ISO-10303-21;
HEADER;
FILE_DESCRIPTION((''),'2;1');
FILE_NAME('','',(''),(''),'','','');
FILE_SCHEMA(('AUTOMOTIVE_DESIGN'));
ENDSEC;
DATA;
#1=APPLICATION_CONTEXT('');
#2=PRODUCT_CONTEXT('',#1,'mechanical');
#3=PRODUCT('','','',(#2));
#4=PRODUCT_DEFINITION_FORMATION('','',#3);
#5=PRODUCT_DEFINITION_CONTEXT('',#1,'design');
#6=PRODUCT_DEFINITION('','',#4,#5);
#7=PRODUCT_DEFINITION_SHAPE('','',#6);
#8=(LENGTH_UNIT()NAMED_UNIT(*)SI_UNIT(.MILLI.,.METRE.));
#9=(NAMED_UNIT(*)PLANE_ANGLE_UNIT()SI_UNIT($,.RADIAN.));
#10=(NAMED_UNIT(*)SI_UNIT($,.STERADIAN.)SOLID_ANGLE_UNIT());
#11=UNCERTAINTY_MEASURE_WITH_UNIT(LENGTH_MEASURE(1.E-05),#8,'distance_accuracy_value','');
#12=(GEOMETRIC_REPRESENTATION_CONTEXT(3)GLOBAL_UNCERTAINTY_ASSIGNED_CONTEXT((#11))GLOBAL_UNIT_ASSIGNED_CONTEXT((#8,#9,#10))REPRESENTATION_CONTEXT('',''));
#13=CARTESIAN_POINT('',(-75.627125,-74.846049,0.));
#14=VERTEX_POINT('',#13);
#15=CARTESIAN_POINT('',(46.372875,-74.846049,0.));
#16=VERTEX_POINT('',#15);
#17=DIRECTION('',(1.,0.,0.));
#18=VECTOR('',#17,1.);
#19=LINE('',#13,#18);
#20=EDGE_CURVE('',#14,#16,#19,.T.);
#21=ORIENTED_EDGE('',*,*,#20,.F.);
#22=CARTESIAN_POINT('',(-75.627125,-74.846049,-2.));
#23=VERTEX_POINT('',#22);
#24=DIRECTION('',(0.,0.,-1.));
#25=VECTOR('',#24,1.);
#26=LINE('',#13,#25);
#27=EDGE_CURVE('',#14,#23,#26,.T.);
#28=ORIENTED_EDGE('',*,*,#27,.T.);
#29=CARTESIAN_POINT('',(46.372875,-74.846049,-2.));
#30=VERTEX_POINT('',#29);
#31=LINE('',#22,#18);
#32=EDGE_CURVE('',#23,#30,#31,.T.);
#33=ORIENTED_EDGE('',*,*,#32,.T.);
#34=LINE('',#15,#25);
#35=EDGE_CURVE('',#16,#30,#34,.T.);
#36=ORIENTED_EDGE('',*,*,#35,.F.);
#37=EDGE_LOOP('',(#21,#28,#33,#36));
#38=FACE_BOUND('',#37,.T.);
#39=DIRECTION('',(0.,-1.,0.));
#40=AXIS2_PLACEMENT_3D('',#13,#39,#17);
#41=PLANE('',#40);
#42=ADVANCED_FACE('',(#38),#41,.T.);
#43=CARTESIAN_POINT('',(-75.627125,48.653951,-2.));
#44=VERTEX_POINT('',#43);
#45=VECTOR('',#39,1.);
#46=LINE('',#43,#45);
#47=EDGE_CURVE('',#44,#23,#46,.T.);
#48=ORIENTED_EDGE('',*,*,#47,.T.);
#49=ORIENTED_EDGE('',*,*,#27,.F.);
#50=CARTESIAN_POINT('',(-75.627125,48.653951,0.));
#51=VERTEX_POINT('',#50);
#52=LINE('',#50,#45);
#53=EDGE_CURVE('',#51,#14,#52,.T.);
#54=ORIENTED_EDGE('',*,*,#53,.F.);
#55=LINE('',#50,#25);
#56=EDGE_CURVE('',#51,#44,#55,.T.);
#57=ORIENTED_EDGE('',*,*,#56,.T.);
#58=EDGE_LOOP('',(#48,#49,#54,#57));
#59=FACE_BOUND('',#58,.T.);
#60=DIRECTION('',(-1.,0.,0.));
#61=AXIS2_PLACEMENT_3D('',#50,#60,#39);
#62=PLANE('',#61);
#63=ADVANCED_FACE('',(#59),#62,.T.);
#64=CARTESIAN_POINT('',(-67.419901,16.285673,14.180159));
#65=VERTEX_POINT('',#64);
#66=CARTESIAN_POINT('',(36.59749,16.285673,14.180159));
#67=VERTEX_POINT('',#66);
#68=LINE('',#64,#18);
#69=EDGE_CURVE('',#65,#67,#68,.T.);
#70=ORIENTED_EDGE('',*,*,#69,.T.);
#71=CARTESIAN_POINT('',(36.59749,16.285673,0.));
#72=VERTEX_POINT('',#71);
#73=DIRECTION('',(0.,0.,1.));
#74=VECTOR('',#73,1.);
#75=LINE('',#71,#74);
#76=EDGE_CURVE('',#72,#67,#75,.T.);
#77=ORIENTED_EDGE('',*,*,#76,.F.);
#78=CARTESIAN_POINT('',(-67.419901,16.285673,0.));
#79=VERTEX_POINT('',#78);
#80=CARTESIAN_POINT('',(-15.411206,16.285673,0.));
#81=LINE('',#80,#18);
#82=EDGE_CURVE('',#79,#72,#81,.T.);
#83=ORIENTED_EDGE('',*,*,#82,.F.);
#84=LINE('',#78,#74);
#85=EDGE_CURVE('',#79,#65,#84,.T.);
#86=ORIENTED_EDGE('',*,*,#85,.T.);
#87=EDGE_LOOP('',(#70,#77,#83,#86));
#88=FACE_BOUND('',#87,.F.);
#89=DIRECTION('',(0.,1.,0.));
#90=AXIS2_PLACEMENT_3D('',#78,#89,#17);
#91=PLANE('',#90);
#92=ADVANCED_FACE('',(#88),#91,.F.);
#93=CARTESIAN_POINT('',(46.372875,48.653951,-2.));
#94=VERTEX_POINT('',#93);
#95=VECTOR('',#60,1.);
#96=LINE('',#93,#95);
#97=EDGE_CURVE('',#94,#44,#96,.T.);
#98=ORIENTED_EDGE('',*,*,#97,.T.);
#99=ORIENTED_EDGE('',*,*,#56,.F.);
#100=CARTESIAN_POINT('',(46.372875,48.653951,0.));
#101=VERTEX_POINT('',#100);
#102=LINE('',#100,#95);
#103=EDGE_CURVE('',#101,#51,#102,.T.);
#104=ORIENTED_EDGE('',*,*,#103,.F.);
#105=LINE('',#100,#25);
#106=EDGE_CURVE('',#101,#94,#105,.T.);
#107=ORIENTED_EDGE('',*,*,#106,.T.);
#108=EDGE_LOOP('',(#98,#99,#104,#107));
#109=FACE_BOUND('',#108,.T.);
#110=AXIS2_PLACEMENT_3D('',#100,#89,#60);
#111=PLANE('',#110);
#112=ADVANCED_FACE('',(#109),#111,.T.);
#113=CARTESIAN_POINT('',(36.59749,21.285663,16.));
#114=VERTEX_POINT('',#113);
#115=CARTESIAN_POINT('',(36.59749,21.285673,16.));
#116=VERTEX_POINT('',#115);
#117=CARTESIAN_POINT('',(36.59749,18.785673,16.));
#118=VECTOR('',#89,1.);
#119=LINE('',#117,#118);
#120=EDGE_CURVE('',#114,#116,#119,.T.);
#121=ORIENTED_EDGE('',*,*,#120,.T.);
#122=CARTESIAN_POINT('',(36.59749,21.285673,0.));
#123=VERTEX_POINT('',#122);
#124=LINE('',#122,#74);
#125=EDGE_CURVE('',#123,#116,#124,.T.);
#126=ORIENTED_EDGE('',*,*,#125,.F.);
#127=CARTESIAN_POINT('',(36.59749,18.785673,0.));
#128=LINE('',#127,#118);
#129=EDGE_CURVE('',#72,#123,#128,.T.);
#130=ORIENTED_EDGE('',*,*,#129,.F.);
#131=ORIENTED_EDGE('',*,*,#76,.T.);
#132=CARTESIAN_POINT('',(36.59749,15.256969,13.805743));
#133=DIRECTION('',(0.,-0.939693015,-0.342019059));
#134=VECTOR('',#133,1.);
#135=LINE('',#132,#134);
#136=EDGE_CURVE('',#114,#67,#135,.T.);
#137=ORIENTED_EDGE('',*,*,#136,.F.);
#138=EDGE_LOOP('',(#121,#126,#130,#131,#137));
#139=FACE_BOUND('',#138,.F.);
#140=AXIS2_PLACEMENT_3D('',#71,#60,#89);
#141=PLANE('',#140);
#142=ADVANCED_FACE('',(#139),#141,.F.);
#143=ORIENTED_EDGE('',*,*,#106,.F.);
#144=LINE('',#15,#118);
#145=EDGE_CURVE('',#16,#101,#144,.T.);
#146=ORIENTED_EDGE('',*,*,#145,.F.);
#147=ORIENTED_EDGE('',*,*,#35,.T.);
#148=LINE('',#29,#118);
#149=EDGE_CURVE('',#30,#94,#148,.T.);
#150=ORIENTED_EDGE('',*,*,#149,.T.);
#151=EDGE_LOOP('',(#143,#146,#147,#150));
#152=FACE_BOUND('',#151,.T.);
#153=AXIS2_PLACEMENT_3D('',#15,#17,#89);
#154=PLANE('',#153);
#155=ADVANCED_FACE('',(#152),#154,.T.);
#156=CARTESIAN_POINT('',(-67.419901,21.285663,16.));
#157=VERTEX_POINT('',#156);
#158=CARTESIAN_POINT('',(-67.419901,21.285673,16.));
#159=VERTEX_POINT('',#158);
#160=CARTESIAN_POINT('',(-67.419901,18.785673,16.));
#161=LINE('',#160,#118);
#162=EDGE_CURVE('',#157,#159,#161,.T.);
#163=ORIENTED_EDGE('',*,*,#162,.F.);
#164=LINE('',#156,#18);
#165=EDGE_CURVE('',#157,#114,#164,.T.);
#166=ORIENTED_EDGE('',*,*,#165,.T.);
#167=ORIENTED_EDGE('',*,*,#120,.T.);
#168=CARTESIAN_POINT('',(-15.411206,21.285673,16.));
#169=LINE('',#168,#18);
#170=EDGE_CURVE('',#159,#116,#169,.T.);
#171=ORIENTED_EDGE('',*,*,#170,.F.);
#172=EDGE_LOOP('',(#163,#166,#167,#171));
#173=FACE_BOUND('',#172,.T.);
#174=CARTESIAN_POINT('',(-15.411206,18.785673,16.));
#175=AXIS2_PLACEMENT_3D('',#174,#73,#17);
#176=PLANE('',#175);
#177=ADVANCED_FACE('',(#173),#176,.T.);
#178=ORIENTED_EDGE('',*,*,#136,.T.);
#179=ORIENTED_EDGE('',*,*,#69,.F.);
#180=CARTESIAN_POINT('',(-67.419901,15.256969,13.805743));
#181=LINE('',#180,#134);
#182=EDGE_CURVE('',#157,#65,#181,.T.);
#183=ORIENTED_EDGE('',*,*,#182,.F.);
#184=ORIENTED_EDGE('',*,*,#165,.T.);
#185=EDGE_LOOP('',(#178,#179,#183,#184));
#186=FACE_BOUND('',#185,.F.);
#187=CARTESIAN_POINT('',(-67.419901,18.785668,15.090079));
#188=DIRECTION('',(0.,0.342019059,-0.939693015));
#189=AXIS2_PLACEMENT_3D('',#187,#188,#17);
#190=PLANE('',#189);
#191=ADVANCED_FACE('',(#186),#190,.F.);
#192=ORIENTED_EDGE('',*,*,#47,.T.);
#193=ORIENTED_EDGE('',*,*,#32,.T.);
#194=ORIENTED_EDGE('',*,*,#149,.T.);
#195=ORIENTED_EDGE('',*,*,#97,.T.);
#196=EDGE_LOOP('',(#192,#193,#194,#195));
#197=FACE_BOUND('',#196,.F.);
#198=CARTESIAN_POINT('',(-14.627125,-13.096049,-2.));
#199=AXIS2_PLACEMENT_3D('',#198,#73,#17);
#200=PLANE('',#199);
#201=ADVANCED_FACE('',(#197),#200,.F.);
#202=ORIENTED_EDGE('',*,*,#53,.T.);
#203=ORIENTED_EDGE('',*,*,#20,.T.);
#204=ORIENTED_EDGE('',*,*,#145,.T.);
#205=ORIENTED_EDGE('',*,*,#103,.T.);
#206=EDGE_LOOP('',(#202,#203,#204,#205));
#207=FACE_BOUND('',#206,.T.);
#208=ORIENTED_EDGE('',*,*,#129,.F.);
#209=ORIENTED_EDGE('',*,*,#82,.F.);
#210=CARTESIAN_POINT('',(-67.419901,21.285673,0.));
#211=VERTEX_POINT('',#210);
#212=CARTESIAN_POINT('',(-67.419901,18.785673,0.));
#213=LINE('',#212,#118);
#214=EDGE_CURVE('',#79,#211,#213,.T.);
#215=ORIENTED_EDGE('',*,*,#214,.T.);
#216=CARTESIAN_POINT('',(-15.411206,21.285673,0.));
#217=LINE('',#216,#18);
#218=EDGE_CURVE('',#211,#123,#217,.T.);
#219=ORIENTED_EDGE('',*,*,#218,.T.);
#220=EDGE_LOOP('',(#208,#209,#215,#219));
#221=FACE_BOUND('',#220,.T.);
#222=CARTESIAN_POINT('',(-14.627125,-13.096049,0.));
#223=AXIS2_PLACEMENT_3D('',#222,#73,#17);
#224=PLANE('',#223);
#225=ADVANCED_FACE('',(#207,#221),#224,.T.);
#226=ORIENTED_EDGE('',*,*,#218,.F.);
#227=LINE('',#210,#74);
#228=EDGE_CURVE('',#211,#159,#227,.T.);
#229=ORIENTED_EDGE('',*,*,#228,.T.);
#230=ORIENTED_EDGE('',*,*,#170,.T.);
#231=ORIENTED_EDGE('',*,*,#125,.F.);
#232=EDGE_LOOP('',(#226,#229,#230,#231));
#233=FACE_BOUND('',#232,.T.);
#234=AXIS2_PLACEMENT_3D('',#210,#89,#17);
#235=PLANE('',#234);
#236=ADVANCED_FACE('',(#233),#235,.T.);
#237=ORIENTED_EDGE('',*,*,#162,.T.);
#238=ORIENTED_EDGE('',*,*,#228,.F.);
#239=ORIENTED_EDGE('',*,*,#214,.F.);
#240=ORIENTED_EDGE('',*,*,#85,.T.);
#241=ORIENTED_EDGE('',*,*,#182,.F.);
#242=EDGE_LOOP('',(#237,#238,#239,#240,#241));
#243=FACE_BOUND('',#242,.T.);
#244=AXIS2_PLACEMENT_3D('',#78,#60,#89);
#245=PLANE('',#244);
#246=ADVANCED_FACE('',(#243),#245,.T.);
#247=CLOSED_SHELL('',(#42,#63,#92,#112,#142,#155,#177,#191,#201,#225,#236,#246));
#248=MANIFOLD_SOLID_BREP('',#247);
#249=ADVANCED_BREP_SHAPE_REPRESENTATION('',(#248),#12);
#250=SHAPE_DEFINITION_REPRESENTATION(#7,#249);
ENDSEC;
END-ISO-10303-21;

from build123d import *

# Parameters (mm, degrees)
F0_W     = 104.0173918009
F0_H     = 5
F1_DEPTH = 2
F2_DEPTH = 16
F3_SIZE2 = 1.819841
F3_SIZE  = 4.99999


# Not quite as in the source:
# - a fillet or chamfer is up to 0.001 mm smaller than in the source, because OpenCascade refuses the exact size


with BuildPart() as f1:
    # F0 (on Top) → F1 (new body)
    with BuildSketch(Plane.XY):
        Polygon((-72.627124867, 48.6539505273), (-75.627124867, 48.6539505273), (-75.627124867, -74.8460494727), (-72.627124867, -74.8460494727), (-14.627124867, -74.8460494727), (-14.3716531694, -74.8460494727), (43.372875133, -74.8460494727), (46.372875133, -74.8460494727), (46.372875133, 48.6539505273), (43.372875133, 48.6539505273), (-14.3716531694, 48.6539505273), (-14.627124867, 48.6539505273), (-14.8716531694, 48.6539505273), align=None)
        with Locations((-15.4112055898, 18.7856731331)):
            Rectangle(F0_W, F0_H, mode=Mode.SUBTRACT)
        with Locations((-15.4112055898, 18.7856731331)):
            Rectangle(F0_W, F0_H)
    extrude(amount=-F1_DEPTH)

    # F0 (on Top) → F2 (join)
    with BuildSketch(Plane.XY):
        with Locations((-15.4112055898, 18.7856731331)):
            Rectangle(F0_W, F0_H)
    extrude(amount=F2_DEPTH)

    # F3 (size 5 and 1.8198511713 in the source; OpenCascade refuses exactly that, so slightly less here)
    f3_edges = [f1.edges().sort_by_distance(p)[0] for p in [
        (-15.411206, 16.285673, 16),
    ]]
    f3_side = f1.faces().sort_by_distance((-15.411206, 18.785673, 16))[0]
    chamfer(f3_edges, length=F3_SIZE, length2=F3_SIZE2, reference=f3_side)


solid = f1.part
